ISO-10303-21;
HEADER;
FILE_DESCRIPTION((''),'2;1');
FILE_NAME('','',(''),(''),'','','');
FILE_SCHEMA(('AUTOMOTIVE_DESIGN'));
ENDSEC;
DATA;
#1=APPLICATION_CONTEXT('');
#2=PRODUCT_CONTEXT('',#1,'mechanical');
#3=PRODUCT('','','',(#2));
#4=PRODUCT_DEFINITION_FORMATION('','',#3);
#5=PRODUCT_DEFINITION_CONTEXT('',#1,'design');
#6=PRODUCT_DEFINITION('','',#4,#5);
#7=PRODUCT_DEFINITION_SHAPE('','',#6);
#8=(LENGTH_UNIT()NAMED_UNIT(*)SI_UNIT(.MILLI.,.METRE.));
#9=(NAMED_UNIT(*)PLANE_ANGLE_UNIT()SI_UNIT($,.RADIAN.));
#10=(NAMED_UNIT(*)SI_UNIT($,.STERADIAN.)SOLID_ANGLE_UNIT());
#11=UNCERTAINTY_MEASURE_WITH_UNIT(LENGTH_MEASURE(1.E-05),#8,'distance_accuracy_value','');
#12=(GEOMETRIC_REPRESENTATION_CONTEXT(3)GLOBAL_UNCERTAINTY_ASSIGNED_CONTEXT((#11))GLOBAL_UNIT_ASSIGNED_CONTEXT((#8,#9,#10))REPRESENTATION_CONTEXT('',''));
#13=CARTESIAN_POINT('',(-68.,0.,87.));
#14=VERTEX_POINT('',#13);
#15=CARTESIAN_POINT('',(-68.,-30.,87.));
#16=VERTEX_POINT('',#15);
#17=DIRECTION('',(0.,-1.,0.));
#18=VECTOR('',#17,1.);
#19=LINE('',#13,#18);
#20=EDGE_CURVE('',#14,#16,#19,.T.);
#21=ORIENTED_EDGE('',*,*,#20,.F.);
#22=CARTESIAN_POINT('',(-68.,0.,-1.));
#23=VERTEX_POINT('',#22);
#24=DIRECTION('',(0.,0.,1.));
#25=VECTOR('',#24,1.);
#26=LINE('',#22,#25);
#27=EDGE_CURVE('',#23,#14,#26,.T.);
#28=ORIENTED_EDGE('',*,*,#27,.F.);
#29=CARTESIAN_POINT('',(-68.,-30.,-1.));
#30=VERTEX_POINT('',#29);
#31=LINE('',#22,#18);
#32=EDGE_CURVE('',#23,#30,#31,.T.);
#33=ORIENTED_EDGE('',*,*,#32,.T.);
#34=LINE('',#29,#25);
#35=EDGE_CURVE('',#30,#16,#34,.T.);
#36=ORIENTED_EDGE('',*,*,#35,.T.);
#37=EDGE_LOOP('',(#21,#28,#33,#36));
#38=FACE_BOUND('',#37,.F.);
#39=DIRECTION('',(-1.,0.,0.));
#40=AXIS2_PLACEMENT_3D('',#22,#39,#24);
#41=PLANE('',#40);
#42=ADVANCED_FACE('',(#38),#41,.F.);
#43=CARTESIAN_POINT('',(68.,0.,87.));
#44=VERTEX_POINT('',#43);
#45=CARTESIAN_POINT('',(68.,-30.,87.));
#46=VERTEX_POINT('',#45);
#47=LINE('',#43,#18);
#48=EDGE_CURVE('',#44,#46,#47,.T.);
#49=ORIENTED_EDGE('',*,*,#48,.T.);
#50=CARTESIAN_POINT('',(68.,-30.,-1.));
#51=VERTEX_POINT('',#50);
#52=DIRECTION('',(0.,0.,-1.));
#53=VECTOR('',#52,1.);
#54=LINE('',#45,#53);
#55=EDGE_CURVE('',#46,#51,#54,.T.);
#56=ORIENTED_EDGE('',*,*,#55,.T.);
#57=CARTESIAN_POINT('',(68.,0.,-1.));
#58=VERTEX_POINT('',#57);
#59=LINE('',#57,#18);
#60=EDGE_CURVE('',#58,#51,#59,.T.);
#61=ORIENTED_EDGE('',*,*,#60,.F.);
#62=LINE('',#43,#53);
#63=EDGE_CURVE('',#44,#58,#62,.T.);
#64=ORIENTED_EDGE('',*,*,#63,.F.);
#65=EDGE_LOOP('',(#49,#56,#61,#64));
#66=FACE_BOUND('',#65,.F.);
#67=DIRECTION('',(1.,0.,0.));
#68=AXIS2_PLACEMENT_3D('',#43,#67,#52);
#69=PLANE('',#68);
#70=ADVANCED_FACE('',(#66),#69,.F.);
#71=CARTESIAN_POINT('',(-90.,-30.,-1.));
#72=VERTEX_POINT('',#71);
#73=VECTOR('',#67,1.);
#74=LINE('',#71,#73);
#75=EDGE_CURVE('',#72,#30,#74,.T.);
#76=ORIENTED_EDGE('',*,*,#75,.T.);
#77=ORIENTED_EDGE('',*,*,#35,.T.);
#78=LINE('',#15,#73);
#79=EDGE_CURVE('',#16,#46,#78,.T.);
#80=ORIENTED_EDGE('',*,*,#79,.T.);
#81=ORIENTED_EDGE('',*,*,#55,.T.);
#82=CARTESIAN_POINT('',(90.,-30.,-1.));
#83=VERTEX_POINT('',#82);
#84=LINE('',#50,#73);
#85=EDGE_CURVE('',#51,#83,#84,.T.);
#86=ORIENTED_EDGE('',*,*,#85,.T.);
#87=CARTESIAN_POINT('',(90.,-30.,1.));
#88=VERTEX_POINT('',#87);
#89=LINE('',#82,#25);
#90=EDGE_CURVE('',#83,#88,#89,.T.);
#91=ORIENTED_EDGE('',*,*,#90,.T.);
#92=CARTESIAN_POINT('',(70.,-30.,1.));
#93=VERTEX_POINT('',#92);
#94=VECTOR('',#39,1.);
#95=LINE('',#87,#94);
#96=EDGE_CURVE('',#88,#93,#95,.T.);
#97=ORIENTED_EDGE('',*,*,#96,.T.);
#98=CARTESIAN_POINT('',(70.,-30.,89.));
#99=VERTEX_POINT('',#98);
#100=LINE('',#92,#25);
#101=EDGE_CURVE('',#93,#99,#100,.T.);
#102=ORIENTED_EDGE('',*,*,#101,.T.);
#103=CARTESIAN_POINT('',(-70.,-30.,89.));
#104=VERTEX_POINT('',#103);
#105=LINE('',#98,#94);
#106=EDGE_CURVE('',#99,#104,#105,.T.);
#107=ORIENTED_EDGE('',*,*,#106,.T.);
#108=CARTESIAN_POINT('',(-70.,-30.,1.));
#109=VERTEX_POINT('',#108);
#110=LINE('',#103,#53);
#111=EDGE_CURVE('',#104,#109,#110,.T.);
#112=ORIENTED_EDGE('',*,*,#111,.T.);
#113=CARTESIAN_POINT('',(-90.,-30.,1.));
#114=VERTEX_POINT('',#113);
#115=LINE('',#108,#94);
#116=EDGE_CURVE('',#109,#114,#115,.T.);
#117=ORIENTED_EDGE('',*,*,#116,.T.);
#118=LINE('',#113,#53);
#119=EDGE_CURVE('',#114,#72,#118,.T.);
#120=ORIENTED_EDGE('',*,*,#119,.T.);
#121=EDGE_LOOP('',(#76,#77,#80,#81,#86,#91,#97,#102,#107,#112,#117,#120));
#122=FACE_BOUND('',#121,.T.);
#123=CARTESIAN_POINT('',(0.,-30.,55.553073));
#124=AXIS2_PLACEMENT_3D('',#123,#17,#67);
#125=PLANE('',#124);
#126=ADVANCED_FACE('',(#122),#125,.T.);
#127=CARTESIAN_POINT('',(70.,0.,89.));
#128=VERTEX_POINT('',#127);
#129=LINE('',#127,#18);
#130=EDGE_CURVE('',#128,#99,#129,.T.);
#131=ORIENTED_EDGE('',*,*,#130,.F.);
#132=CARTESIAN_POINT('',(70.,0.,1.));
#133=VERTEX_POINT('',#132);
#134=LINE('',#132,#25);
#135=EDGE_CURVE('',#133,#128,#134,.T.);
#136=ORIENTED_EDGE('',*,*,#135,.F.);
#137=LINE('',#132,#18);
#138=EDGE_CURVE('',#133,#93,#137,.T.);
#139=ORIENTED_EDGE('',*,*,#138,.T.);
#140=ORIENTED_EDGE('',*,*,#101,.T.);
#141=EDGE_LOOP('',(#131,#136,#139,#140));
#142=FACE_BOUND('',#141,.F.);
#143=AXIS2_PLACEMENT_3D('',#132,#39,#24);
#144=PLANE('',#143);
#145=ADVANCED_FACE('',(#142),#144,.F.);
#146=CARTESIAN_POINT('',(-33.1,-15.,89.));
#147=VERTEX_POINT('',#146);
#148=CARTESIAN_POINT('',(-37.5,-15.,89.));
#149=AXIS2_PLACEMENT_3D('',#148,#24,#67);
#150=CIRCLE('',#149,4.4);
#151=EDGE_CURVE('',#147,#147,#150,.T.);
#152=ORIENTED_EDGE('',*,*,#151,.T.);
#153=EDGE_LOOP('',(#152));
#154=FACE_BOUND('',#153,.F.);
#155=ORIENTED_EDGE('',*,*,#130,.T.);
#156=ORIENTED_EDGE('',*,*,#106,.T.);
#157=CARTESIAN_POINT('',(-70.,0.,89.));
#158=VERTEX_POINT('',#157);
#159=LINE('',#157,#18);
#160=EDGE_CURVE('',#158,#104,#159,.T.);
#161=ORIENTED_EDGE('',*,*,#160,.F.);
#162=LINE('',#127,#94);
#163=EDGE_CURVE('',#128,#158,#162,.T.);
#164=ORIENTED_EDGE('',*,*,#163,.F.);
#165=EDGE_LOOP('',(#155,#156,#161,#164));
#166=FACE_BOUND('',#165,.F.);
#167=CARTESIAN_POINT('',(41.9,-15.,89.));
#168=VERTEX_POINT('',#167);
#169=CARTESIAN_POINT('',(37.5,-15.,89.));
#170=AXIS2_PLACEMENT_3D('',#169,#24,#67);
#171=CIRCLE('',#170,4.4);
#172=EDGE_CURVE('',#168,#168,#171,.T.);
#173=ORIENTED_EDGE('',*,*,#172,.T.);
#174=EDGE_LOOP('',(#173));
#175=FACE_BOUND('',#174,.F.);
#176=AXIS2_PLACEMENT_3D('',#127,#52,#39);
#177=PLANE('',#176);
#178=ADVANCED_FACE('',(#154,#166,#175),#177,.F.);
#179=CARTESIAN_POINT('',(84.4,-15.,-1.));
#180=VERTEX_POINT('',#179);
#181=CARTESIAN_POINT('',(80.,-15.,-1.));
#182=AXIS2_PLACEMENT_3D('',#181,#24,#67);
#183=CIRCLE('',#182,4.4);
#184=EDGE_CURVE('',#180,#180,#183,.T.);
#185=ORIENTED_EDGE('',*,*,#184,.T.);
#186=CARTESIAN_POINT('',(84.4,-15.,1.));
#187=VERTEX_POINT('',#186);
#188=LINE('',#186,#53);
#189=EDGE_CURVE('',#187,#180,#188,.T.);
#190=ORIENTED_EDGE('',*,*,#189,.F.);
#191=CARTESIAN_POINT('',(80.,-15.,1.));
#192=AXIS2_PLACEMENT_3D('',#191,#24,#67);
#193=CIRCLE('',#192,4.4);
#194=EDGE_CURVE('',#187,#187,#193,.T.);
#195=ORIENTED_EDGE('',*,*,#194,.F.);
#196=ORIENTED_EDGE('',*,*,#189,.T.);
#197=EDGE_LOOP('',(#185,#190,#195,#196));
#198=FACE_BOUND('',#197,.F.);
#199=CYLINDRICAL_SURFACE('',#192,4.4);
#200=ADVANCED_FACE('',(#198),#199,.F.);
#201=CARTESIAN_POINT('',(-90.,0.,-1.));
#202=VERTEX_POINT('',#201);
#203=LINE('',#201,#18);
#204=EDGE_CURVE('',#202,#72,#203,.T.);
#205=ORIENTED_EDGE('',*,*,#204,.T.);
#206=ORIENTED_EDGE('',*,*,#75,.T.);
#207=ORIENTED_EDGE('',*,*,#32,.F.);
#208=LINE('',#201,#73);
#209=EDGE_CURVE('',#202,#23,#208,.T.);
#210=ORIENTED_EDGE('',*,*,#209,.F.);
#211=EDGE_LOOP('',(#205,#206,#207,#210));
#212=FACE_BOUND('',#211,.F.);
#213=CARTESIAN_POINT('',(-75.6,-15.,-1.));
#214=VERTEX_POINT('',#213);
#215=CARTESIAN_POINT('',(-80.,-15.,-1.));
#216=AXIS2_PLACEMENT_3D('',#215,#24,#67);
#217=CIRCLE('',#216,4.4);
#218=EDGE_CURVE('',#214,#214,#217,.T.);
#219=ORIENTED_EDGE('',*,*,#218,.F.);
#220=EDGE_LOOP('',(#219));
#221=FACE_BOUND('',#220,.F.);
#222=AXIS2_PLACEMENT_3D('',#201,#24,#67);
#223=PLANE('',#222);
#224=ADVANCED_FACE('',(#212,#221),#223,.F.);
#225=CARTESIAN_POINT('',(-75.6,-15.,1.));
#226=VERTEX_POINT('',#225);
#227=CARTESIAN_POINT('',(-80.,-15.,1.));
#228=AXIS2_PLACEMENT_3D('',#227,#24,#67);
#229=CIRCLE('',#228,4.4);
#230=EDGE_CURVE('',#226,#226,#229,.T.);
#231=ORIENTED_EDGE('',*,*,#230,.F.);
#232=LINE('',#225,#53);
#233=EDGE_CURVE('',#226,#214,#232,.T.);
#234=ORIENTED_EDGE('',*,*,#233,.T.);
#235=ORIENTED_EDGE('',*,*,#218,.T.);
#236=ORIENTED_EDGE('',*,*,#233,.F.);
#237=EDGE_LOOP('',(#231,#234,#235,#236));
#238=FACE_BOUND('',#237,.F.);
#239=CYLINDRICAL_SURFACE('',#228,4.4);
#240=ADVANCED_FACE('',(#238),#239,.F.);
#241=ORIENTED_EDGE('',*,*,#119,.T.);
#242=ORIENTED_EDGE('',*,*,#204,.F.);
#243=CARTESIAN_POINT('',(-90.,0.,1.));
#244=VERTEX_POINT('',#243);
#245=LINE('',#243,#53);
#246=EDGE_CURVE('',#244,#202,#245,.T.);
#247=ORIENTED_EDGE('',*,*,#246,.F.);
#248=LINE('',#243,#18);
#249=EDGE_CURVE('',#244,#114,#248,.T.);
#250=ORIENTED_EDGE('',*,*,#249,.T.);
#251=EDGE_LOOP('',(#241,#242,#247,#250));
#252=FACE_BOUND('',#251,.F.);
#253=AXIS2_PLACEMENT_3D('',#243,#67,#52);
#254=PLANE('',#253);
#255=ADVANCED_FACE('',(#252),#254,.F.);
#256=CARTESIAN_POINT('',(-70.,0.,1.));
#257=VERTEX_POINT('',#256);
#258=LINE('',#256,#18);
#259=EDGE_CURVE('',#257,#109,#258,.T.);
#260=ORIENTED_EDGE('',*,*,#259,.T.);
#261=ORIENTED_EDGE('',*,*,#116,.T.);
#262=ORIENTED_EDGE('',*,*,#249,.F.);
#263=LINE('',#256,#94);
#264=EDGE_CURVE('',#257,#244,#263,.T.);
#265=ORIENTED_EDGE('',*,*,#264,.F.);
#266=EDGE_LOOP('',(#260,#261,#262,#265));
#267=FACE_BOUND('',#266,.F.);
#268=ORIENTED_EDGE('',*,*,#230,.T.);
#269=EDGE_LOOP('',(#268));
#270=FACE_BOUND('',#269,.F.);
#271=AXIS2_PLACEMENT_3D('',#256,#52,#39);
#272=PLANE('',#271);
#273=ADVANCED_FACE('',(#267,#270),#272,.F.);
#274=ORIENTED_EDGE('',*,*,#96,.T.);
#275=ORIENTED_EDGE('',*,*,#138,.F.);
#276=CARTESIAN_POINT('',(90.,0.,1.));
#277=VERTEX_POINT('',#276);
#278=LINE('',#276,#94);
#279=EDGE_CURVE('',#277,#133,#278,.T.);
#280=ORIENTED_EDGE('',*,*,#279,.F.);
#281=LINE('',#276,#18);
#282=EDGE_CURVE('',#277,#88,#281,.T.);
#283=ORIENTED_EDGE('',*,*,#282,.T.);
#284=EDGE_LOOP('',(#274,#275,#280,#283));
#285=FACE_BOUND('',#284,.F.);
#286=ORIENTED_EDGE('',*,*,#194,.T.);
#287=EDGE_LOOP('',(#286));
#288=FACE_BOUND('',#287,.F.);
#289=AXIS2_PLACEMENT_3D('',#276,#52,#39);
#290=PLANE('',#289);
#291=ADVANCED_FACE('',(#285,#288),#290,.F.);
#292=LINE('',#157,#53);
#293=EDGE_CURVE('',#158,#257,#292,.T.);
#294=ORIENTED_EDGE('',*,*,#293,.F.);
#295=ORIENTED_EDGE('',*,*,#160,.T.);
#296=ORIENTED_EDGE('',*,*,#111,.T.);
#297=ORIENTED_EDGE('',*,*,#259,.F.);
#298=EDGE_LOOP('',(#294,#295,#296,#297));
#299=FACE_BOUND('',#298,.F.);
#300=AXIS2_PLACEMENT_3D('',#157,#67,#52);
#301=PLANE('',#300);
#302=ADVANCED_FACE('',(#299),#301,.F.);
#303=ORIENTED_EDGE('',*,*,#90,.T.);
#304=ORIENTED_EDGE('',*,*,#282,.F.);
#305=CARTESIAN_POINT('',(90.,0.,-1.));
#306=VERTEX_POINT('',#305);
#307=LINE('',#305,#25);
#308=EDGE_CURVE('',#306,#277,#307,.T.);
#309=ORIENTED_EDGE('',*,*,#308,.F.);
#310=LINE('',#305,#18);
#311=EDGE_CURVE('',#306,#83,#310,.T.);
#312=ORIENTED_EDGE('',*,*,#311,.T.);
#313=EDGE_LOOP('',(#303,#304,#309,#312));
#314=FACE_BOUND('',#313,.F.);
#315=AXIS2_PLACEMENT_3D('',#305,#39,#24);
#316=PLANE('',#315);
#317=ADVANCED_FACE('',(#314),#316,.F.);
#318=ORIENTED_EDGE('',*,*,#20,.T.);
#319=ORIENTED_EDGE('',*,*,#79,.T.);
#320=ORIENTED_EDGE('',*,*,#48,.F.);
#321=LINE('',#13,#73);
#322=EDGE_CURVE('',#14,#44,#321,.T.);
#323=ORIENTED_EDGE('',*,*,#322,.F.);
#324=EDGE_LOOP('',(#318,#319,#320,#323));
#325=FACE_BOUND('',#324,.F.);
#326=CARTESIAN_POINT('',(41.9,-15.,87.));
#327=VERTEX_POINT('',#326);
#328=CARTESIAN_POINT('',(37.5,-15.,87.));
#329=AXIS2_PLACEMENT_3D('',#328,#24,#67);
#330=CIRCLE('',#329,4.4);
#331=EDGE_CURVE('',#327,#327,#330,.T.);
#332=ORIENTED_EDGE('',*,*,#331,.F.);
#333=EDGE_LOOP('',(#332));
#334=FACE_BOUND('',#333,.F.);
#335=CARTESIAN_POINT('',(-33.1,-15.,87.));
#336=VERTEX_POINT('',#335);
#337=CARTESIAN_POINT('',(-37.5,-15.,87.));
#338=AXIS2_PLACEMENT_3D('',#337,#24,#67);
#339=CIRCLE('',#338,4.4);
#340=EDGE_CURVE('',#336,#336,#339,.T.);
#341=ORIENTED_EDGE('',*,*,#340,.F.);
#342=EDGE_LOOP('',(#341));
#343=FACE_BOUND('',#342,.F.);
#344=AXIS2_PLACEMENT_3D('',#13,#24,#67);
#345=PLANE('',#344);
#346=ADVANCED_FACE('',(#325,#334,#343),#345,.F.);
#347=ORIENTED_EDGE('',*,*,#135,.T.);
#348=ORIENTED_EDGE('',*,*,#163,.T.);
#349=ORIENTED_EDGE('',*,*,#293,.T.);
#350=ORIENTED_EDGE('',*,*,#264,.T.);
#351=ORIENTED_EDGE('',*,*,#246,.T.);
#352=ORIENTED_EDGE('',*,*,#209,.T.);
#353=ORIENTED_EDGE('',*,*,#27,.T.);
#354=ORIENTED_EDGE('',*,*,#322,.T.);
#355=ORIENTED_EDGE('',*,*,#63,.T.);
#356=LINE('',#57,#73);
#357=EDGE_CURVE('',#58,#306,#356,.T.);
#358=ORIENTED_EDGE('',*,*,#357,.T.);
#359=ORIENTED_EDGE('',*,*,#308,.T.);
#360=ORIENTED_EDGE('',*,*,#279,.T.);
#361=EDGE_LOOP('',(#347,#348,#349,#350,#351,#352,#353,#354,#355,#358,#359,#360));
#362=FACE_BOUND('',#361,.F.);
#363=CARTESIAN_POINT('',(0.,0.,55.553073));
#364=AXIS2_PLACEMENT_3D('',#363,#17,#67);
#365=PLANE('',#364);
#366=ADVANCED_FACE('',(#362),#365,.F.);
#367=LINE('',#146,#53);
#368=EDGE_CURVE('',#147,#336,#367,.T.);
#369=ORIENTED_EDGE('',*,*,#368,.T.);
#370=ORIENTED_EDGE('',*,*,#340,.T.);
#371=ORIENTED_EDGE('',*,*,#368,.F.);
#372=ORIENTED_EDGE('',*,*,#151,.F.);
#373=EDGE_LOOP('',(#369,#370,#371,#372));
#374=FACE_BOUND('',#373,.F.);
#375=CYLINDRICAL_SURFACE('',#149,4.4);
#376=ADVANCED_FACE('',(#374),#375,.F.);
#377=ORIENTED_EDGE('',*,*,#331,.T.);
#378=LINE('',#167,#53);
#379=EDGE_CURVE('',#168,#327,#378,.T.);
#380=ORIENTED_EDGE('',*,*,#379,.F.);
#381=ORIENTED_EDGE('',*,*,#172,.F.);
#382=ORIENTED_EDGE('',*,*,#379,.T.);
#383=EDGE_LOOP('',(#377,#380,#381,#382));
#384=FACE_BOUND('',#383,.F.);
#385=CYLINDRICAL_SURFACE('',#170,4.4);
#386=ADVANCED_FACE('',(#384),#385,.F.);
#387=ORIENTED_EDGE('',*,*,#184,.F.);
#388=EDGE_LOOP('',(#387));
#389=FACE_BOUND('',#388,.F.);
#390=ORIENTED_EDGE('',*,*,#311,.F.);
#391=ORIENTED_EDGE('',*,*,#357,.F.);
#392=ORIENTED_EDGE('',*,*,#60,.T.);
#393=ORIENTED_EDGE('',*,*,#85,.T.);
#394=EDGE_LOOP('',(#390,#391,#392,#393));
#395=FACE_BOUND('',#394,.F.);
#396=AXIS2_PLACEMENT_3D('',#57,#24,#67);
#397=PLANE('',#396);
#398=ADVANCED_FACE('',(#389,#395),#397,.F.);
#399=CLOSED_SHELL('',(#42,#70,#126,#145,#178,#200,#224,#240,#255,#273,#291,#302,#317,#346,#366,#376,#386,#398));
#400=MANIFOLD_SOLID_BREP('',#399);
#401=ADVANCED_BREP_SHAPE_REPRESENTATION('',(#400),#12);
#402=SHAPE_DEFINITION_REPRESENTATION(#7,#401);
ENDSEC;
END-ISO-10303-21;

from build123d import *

# Parameters (mm, degrees)
F1_DEPTH = 30
F2_R     = 4.4
F3_R     = 4.4
F4_DEPTH = 25


# Not quite as in the source:
# - a feature names something its author has since deleted; it is built from what else it names


with BuildPart() as f1:
    # F0 (on Front) → F1 (new body)
    with BuildSketch(Plane.XZ):
        Polygon((90, -1), (90, 1), (70, 1), (70, 89), (-70, 89), (-70, 1), (-90, 1), (-90, -1), (-68, -1), (-68, 87), (68, 87), (68, -1), align=None)
    extrude(amount=F1_DEPTH)

    # F2 (on face) + F3 (on face) → F4 (cut)
    with BuildSketch(Plane.XY.offset(1)):
        with Locations((-80, -15)):
            Circle(F2_R)
        with Locations((80, -15)):
            Circle(F2_R)
    with BuildSketch(Plane.XY.offset(89)):
        with Locations((-37.5, -15)):
            Circle(F3_R)
        with Locations((37.5, -15)):
            Circle(F3_R)
    extrude(amount=-F4_DEPTH, mode=Mode.SUBTRACT)


solid = f1.part
